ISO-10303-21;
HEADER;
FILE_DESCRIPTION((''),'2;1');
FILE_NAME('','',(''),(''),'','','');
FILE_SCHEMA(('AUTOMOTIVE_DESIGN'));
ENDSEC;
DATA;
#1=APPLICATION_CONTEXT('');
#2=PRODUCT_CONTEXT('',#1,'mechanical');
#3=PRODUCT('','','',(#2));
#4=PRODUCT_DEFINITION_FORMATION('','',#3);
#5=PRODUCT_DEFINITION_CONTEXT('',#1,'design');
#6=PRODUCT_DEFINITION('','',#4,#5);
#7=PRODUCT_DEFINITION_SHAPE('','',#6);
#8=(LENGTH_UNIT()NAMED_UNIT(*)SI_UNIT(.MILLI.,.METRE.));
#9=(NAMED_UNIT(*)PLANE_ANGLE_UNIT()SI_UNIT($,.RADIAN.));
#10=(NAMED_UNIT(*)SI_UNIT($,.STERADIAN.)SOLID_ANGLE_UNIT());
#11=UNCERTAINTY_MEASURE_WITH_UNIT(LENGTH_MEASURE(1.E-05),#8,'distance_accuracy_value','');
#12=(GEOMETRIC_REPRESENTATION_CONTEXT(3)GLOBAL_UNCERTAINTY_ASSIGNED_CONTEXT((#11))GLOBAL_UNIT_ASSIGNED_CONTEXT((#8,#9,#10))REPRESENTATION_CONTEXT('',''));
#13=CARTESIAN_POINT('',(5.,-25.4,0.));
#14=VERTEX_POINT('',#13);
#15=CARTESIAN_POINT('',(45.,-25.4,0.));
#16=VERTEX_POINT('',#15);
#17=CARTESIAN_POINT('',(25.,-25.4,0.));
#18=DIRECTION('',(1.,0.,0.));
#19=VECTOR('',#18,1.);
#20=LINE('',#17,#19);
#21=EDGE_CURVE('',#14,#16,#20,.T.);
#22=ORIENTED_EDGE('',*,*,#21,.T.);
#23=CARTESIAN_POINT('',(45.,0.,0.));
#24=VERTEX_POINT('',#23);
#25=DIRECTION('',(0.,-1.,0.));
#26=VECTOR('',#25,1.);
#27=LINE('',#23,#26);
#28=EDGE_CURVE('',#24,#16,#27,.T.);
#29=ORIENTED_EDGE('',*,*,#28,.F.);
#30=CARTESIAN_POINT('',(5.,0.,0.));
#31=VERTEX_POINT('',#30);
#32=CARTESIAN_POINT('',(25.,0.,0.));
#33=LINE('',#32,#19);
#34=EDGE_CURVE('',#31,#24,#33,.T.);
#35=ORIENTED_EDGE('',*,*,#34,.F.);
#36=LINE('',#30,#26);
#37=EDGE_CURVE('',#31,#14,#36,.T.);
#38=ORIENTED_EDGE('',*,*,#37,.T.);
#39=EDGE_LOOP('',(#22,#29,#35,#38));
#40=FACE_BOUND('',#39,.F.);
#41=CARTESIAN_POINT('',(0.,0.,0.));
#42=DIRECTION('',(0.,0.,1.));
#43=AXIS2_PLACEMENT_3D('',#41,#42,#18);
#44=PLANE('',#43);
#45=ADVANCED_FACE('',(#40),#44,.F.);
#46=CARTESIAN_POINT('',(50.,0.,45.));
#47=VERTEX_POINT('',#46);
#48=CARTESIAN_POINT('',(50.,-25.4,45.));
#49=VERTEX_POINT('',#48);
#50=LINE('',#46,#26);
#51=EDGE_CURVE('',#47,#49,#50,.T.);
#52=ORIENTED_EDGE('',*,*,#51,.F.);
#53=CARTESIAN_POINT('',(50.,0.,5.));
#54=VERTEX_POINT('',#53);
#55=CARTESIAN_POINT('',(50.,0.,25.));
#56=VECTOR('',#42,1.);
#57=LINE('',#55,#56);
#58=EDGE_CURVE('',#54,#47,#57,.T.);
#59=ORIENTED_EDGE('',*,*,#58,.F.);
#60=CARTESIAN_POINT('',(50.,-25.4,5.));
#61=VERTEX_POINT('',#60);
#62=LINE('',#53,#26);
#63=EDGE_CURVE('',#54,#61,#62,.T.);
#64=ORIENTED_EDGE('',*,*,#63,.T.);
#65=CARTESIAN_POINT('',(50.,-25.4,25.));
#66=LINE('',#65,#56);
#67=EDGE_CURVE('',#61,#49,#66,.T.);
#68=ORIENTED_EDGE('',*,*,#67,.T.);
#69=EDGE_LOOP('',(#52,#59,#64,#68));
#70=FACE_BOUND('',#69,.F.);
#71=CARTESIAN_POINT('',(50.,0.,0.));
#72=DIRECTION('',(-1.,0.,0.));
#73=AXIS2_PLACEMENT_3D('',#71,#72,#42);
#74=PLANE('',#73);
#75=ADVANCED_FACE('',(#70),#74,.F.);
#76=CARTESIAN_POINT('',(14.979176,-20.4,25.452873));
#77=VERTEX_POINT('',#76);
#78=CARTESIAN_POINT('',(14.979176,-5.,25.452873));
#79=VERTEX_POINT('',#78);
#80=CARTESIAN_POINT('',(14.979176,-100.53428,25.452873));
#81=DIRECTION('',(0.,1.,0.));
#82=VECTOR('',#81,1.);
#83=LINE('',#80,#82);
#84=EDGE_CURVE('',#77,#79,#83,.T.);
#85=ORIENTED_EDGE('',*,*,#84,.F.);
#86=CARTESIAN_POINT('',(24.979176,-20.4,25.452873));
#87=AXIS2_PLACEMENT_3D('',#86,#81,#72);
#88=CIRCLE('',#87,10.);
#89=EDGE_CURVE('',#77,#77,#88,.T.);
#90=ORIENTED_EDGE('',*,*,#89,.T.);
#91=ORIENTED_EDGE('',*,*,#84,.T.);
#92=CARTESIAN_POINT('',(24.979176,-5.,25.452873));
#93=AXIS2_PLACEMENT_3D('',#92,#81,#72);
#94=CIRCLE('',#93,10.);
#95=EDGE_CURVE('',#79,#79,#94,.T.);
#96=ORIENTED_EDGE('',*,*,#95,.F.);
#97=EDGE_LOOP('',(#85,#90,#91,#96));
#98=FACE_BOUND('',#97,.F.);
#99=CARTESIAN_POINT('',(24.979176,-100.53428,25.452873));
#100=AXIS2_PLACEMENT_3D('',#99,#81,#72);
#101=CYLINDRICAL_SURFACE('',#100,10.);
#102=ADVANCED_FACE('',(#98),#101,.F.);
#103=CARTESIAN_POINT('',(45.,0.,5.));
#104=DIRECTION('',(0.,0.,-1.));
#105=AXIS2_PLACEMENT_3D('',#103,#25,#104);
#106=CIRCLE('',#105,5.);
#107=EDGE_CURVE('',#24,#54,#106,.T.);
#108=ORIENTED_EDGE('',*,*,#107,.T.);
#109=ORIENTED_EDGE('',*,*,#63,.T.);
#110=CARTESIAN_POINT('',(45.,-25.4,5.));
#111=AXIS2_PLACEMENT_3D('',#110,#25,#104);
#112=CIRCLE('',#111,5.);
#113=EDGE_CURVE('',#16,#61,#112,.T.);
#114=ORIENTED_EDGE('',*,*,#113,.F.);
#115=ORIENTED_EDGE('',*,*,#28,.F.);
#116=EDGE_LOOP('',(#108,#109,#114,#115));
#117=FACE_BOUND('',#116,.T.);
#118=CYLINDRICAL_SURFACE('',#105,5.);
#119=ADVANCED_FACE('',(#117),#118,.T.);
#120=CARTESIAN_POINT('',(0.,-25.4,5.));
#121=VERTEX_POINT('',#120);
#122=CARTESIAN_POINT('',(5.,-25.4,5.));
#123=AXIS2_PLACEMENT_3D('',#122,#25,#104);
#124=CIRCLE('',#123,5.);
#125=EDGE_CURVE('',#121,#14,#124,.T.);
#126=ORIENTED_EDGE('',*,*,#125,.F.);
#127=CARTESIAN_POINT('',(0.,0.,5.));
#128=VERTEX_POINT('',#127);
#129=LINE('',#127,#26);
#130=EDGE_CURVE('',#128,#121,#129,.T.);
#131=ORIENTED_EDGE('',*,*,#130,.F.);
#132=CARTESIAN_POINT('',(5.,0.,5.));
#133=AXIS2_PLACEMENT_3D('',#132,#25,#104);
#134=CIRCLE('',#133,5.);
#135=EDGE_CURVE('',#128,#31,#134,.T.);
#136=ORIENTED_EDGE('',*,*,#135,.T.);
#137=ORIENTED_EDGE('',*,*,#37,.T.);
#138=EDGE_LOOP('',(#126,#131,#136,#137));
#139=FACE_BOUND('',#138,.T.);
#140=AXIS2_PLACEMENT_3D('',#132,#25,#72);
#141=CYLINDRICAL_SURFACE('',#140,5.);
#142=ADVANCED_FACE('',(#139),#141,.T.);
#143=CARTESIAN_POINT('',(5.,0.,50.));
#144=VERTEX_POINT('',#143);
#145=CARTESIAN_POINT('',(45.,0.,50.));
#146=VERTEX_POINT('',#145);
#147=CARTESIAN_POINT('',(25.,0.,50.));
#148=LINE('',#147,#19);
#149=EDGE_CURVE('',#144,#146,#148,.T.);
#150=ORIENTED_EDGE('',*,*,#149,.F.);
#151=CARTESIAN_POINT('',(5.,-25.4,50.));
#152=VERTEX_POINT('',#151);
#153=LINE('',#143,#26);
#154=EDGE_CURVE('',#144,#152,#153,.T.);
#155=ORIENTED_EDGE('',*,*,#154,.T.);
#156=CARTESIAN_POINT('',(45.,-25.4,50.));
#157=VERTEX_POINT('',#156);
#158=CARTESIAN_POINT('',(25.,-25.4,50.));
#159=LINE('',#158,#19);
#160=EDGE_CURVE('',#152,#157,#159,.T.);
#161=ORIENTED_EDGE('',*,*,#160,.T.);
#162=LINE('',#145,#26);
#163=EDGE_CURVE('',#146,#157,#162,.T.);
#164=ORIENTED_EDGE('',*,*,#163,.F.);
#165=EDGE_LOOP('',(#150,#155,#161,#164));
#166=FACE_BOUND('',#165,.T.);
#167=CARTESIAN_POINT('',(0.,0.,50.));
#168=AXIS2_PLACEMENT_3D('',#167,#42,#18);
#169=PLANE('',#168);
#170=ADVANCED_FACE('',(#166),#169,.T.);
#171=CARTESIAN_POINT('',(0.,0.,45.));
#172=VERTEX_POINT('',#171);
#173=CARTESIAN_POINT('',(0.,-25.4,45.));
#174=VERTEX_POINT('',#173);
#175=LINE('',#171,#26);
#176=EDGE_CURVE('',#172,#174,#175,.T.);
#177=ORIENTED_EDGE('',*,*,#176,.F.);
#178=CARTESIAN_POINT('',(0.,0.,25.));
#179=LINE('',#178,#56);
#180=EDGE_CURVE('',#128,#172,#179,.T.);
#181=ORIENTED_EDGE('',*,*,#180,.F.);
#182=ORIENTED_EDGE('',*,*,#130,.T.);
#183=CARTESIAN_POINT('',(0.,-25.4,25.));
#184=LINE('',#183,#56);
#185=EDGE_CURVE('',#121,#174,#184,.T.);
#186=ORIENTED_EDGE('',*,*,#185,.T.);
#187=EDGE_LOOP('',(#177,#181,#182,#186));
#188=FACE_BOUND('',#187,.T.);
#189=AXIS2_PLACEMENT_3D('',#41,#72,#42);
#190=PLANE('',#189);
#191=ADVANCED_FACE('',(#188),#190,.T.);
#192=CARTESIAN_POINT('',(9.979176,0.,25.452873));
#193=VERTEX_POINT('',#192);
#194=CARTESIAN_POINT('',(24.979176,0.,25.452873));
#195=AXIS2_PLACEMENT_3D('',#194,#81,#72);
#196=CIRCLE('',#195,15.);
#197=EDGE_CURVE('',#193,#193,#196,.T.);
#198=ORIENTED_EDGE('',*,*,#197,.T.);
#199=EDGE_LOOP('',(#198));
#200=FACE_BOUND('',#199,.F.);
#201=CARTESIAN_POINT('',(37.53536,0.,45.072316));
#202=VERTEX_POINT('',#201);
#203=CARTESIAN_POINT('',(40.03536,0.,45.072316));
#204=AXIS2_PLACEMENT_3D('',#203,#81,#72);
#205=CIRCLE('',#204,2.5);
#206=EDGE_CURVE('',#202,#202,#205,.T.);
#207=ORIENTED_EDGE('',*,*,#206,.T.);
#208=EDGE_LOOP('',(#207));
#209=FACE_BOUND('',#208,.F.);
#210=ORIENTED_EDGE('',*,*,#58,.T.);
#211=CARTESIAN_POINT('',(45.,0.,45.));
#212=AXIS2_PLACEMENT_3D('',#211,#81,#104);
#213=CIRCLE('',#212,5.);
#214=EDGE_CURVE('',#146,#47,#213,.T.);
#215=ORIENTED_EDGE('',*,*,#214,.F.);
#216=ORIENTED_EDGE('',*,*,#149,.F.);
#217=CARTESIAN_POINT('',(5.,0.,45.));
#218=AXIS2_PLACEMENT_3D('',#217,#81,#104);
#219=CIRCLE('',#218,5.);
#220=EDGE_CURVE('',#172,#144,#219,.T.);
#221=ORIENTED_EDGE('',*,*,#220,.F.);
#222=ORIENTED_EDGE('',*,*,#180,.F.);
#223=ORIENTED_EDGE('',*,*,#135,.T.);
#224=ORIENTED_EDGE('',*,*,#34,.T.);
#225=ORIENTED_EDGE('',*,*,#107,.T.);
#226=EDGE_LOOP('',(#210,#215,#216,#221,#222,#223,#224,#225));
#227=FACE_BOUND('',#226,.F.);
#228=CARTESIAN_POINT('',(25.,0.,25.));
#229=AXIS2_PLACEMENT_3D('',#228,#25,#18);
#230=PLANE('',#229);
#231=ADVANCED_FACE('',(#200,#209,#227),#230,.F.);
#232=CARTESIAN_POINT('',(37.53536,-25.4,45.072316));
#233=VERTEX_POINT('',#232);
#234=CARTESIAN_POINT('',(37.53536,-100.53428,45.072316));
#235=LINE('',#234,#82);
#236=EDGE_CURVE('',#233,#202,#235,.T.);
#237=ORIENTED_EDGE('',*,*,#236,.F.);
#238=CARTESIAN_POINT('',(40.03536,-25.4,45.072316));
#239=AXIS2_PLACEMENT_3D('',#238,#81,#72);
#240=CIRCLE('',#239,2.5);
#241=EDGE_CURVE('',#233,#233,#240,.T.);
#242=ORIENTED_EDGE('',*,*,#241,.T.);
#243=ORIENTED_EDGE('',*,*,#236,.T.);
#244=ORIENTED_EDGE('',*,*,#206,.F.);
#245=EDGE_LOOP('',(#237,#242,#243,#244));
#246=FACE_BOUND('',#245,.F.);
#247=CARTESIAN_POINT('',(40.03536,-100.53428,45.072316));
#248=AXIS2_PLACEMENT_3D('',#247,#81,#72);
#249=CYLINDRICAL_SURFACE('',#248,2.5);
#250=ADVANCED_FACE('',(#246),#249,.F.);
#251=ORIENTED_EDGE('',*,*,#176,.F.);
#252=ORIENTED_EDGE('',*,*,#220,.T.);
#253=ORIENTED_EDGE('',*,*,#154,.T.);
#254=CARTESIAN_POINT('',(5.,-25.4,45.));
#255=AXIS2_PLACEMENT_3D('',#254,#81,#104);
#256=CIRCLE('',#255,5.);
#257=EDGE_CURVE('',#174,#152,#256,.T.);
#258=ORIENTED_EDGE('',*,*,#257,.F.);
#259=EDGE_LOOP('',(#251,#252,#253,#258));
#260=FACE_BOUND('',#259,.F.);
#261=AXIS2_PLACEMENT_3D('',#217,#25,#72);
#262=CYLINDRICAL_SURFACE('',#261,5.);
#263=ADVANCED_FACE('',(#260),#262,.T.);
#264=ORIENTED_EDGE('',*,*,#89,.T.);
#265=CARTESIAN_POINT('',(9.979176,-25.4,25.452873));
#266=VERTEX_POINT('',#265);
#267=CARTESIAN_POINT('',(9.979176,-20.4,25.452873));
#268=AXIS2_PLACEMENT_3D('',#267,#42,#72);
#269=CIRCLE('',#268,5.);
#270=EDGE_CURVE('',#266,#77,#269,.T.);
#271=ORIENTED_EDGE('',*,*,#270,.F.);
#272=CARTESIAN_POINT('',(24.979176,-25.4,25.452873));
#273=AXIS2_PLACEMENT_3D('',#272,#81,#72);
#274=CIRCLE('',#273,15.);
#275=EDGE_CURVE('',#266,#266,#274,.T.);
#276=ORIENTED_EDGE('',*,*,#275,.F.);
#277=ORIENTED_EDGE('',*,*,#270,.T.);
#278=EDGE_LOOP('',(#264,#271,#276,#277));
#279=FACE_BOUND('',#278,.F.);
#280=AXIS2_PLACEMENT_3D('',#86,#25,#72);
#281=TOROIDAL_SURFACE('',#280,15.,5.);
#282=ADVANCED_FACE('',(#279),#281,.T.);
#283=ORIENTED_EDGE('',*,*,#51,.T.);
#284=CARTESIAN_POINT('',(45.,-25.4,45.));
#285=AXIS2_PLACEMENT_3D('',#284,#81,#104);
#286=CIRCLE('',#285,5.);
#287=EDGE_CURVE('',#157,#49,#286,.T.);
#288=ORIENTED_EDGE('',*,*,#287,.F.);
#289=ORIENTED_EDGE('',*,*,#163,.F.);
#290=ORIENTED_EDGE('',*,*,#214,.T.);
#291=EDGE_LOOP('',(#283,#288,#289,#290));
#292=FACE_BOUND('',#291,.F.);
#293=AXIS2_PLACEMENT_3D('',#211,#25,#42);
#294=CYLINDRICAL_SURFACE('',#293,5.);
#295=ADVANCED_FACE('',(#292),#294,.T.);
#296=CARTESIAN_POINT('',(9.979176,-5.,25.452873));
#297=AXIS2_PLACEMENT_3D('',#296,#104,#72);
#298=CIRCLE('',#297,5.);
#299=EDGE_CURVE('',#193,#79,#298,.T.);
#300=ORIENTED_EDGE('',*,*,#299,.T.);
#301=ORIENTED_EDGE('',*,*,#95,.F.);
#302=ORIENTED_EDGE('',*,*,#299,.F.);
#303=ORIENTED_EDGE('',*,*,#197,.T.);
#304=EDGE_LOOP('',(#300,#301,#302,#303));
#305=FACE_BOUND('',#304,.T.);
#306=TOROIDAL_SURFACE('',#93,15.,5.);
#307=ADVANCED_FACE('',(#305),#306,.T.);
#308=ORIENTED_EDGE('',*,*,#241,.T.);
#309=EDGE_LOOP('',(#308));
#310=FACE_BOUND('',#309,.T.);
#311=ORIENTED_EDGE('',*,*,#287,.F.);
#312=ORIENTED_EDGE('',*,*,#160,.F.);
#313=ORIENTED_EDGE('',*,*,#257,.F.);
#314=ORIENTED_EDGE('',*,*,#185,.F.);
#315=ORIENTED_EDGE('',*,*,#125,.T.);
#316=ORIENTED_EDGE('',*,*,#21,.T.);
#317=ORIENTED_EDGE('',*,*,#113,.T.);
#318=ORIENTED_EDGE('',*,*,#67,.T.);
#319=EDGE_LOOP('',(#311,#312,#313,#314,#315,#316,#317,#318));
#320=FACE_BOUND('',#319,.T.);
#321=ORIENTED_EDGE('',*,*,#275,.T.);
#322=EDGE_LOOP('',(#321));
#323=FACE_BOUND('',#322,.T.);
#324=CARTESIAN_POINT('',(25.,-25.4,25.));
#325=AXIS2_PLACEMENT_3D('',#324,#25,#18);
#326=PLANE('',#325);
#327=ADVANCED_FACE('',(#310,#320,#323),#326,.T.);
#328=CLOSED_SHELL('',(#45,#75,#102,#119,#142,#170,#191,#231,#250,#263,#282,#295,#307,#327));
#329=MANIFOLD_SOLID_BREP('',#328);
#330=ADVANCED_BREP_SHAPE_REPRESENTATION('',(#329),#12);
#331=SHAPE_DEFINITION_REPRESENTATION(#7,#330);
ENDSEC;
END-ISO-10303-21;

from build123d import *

# Parameters (mm, degrees)
F0_W     = 50
F0_H     = 50
F1_DEPTH = 25.4
F3_D     = 20
F4_R     = 5
F6_D     = 5


with BuildPart() as f1:
    # F0 (on Front) → F1 (new body)
    with BuildSketch(Plane.XZ):
        with Locations((25, 25)):
            Rectangle(F0_W, F0_H)
    extrude(amount=F1_DEPTH)

    # F3 (through all)
    with Locations(Plane.XZ.offset(25.4)):
        with Locations((24.9791759998, 25.4528727382)):
            Hole(F3_D / 2)

    # F4
    f4_edges = [f1.edges().sort_by_distance(p)[0] for p in [
        (50, -12.7, 50),
        (50, -12.7, 0),
        (0, -12.7, 50),
        (0, -12.7, 0),
        (14.979176, 0, 25.452873),
        (14.979176, -25.4, 25.452873),
    ]]
    fillet(f4_edges, radius=F4_R)

    # F6 (through all)
    with Locations(Plane.XZ.offset(25.4)):
        with Locations((40.0353602501, 45.0723162054)):
            Hole(F6_D / 2)


solid = f1.part
